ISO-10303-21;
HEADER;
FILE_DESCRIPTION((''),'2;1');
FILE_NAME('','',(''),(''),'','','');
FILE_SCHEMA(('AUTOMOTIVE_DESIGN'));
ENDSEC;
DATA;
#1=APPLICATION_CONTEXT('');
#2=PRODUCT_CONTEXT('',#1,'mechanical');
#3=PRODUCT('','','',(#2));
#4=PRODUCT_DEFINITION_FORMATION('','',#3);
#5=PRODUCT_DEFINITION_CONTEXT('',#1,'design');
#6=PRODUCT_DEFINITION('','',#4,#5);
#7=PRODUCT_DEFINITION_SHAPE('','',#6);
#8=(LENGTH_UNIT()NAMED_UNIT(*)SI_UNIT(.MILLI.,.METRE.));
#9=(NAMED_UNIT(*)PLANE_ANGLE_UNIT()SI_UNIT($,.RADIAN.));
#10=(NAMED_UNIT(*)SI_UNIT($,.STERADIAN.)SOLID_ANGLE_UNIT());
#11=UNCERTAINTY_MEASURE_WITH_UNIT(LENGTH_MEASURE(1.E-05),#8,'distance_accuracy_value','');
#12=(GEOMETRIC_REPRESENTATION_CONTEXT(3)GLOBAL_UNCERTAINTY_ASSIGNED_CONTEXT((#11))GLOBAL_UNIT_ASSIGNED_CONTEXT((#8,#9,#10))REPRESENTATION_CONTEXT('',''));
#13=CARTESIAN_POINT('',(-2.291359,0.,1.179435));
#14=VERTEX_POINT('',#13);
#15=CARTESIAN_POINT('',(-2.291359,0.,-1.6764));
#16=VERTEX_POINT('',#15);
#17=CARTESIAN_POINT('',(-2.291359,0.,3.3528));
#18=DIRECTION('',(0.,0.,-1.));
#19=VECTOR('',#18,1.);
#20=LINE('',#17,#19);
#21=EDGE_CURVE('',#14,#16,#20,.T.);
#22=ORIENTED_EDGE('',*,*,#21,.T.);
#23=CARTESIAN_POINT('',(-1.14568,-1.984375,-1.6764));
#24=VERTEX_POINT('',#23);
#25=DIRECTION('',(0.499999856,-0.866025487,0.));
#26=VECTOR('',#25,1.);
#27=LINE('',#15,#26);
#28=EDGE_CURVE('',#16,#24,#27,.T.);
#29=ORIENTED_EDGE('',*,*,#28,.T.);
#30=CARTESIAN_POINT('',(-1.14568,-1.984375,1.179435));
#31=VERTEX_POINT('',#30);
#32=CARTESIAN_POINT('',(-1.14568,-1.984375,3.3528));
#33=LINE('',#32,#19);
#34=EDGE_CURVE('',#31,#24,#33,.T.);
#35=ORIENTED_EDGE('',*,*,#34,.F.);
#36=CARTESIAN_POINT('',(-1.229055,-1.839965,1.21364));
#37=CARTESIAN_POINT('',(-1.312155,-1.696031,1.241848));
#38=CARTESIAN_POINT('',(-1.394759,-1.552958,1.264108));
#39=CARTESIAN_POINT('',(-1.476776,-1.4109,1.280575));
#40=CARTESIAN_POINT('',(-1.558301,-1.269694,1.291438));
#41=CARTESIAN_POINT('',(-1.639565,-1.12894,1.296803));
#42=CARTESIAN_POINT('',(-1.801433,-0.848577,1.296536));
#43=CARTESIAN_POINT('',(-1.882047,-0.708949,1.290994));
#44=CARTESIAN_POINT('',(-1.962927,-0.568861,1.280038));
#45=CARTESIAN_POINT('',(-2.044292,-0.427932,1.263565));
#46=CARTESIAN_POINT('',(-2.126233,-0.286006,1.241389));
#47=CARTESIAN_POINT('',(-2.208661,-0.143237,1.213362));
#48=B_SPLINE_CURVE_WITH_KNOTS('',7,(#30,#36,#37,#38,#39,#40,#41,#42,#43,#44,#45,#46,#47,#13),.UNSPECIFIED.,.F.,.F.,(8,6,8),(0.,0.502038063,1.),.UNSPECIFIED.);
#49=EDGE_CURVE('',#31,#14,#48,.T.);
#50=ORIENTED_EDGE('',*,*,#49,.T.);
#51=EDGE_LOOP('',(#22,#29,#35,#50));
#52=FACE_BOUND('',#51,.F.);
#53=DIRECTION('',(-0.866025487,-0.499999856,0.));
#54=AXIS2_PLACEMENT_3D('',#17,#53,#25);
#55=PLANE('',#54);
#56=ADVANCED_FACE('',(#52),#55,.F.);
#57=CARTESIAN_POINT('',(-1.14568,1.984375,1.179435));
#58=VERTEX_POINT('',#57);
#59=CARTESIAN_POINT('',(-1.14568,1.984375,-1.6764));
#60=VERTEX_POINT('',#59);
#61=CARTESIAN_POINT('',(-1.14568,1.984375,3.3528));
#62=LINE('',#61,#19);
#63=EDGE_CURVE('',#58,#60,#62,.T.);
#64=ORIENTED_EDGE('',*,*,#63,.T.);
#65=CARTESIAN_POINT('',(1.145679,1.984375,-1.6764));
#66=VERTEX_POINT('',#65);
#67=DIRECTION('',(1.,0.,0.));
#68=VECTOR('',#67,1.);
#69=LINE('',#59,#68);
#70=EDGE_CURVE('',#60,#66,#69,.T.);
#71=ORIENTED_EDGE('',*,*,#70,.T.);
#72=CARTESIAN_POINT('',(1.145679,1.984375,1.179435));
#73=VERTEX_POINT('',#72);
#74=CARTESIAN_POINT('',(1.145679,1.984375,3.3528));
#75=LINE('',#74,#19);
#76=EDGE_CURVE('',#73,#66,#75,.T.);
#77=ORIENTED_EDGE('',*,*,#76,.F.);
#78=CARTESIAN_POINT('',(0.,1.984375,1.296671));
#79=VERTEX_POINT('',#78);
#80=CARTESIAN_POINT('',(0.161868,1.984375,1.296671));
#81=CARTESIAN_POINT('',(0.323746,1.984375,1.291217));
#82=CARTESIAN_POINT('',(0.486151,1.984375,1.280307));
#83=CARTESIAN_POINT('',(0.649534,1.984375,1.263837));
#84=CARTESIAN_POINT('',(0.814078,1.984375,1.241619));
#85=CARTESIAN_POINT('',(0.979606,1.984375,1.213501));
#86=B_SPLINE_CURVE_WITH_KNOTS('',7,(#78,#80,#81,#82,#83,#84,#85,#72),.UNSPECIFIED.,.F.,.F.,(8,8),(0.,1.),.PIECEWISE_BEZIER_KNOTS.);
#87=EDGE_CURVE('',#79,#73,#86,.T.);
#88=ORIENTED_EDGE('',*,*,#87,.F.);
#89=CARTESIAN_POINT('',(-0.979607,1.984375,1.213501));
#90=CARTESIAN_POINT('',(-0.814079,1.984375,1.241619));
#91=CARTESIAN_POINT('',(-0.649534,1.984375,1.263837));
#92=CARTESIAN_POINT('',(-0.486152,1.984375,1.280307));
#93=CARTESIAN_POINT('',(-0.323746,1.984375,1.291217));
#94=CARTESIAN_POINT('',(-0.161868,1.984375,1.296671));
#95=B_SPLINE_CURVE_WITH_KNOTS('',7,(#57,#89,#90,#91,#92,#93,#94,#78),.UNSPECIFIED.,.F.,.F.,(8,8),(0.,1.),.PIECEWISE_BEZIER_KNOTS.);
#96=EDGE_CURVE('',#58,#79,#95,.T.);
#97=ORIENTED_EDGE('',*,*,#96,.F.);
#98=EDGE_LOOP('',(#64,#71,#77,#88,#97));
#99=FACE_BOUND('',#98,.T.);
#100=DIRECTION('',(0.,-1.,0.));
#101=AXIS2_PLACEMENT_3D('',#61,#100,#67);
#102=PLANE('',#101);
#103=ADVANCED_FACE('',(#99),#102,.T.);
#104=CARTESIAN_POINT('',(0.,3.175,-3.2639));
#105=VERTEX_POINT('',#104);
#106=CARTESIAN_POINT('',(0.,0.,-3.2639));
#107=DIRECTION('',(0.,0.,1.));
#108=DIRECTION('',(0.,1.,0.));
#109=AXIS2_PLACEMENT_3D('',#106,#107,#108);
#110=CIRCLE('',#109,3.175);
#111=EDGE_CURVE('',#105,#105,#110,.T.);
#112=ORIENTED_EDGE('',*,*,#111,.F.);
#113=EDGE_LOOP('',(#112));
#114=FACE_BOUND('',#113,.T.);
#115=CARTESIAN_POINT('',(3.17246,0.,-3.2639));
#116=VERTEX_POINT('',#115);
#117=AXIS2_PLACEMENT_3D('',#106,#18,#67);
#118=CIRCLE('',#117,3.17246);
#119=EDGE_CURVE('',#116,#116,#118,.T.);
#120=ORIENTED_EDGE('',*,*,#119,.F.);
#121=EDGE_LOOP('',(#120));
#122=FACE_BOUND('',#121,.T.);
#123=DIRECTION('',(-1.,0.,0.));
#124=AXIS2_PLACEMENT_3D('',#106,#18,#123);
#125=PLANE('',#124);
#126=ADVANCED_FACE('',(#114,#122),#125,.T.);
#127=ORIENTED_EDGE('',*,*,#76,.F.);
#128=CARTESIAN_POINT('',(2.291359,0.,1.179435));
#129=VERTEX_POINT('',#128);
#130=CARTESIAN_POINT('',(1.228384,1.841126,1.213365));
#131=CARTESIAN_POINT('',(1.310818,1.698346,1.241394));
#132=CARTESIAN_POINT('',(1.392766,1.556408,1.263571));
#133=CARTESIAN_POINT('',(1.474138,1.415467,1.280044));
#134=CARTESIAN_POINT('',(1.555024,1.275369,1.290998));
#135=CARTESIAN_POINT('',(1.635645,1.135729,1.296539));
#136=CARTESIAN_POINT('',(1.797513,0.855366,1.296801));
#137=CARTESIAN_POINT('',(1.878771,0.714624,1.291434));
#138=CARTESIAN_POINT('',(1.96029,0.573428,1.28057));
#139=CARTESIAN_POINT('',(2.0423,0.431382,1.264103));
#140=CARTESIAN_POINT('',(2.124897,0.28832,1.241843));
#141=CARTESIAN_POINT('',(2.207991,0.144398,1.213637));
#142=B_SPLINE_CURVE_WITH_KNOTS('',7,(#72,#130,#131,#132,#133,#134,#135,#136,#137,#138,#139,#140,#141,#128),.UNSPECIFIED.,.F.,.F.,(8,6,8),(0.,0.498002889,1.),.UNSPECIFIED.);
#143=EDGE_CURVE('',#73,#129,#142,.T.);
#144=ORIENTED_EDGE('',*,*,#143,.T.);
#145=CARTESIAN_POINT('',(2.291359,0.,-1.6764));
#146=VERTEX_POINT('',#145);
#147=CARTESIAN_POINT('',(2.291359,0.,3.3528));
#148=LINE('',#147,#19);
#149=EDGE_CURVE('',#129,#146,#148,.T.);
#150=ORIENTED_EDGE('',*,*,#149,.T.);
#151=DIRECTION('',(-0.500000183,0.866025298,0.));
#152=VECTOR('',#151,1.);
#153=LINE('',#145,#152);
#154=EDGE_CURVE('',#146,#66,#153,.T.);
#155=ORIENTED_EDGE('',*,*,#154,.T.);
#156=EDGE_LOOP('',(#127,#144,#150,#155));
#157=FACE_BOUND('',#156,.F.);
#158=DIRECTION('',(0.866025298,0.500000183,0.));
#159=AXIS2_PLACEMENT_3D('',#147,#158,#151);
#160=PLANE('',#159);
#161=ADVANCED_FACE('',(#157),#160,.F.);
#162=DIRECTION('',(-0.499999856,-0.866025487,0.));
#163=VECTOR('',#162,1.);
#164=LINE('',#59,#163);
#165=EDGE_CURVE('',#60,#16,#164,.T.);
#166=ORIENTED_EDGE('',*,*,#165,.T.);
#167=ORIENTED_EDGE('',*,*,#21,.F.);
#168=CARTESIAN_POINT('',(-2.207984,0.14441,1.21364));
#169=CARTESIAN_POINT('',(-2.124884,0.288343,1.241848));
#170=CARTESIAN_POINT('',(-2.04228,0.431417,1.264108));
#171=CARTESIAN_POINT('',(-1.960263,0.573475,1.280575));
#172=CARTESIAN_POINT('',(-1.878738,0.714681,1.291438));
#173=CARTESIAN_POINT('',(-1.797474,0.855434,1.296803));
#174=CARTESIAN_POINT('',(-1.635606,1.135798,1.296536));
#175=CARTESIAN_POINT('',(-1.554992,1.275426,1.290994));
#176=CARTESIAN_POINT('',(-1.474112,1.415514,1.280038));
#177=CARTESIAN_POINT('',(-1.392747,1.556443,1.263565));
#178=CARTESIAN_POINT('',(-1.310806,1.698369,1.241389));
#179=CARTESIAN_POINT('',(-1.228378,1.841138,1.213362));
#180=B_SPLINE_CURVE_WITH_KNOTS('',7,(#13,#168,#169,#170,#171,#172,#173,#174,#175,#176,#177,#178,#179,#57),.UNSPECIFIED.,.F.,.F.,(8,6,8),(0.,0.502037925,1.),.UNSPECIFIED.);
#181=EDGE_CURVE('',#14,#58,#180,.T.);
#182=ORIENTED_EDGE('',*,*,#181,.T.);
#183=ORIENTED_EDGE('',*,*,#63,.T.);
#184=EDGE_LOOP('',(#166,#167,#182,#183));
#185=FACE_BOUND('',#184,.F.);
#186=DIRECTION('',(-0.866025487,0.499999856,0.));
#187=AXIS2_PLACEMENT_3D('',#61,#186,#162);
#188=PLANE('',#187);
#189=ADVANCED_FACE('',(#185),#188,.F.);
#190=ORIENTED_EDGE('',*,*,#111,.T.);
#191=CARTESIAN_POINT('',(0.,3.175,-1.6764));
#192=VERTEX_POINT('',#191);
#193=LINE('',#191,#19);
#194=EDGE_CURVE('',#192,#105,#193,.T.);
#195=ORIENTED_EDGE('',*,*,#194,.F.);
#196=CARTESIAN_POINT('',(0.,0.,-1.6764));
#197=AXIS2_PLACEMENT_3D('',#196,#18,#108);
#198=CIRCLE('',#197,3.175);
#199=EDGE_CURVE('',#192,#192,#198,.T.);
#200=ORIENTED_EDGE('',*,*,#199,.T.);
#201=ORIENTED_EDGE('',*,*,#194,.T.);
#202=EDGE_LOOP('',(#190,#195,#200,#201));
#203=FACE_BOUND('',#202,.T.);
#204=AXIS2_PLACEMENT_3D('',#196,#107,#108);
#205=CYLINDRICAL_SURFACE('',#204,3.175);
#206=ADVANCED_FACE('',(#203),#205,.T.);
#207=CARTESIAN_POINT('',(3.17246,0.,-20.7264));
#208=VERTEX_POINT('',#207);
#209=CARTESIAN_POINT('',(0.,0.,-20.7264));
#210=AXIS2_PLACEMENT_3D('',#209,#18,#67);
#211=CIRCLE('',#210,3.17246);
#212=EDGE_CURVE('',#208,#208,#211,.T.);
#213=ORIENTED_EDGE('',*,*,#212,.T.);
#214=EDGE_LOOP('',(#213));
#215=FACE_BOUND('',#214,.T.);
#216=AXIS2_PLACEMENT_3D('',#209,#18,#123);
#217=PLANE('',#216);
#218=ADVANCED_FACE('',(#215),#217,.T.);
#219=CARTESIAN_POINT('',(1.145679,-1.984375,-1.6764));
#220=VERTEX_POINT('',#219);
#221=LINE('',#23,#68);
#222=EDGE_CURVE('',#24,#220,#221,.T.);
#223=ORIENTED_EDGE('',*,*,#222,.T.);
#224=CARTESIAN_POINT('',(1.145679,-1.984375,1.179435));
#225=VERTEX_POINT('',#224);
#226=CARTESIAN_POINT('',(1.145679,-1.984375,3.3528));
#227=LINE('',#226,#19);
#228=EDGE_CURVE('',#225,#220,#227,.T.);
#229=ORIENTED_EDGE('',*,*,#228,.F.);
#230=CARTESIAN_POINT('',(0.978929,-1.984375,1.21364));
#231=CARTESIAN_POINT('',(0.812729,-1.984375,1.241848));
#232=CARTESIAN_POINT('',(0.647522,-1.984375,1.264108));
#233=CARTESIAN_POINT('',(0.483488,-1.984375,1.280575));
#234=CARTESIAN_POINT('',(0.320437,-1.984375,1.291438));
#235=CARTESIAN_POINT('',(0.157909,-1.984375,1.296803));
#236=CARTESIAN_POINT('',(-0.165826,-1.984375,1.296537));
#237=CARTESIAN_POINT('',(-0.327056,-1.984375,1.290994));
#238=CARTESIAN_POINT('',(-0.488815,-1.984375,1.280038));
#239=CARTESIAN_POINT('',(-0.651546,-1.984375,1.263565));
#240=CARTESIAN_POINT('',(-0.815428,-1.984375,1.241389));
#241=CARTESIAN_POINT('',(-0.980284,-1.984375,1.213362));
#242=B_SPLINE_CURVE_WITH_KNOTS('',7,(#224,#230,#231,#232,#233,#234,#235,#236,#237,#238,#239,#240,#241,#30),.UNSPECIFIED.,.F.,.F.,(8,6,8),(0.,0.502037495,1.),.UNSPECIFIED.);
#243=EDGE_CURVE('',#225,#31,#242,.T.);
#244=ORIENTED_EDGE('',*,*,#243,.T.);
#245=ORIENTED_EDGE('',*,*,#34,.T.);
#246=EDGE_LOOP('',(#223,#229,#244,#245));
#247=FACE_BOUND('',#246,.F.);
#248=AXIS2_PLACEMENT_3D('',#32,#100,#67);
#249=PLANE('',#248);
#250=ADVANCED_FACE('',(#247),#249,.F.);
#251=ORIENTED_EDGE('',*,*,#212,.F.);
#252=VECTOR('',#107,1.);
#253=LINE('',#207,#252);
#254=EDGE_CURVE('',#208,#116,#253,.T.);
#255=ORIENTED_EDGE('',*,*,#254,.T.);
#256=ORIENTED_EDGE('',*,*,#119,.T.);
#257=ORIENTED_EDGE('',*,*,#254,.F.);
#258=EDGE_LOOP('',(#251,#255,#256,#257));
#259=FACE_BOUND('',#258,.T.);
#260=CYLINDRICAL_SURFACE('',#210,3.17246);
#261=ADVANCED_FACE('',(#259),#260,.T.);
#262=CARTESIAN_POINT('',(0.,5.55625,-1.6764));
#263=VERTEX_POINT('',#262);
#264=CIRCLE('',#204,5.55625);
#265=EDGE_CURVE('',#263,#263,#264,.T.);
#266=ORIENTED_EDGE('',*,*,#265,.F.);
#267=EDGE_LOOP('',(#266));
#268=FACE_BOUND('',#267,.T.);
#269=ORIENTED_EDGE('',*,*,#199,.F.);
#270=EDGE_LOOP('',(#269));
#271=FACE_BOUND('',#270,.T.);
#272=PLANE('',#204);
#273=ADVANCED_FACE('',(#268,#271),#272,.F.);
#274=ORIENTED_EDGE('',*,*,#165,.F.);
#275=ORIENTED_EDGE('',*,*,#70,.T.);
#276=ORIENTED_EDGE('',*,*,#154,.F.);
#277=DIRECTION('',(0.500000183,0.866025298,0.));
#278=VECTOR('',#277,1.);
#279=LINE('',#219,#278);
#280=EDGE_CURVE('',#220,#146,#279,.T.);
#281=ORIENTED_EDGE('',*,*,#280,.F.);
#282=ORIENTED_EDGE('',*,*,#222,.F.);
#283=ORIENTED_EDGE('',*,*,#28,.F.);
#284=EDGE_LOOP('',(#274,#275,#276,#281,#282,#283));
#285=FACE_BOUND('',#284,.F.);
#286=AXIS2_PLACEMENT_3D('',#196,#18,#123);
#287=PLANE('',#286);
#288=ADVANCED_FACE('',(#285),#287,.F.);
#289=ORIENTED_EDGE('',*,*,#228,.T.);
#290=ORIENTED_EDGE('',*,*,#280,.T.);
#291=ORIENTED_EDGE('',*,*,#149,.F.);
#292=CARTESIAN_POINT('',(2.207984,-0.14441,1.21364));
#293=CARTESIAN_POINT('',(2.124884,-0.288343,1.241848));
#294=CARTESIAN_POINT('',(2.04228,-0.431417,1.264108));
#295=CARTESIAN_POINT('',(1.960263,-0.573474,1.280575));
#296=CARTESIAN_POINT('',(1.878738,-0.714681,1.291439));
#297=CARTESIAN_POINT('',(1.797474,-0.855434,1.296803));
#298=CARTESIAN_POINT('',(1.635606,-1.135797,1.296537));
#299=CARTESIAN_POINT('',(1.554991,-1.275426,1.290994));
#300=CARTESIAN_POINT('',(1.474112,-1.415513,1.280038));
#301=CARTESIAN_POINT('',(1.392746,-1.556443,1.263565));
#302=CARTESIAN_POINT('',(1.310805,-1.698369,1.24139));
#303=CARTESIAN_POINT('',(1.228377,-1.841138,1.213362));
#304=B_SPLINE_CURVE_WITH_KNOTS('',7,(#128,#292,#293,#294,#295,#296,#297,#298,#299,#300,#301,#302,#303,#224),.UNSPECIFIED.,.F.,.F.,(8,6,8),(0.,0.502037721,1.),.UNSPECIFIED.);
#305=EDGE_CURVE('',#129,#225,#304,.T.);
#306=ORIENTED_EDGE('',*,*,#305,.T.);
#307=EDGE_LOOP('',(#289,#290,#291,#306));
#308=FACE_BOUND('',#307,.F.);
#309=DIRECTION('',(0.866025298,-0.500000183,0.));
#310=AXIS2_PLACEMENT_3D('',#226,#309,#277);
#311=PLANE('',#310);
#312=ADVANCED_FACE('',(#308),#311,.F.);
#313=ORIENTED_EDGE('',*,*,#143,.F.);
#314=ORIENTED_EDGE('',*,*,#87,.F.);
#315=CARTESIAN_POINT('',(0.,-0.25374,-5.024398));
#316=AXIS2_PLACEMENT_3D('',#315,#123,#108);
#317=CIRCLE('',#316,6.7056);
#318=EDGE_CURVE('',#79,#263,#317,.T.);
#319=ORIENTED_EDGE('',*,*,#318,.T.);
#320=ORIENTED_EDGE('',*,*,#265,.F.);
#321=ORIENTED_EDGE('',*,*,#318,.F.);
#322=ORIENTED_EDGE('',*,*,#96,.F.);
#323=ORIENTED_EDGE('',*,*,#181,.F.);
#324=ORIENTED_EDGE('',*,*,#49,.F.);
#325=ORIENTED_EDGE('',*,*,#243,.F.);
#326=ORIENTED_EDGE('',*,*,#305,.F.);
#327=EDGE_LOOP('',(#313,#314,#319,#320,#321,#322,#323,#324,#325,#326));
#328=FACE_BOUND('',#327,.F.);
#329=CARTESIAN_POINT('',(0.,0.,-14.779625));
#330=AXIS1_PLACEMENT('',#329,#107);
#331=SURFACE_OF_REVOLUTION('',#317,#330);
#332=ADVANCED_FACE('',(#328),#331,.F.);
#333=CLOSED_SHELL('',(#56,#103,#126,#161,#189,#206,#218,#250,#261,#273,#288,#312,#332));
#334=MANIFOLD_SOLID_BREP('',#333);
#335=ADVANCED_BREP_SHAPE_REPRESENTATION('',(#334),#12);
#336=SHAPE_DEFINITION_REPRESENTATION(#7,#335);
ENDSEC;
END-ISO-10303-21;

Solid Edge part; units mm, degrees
sketch "Sketch1" plane through (0, 0, 0) normal (1, 0, 0) x (0, 1, 0)
  line L0 (0, -1.6764) -> (0, 1.6764)
  arc A0 (0, 1.6764) -> (5.55625, -1.6764) centre (-0.25374, -5.024398) cw
  line L1 (0, -1.6764) -> (5.55625, -1.6764)
  dimension "D1" = 3.3528
  dimension "D2" = 6.7056
revolve "RevolvedProtrusion1" add sketch "Sketch1" angle 360 about axis through (0, 0, -14.779625) along (0, 0, 1)
sketch "Sketch2" plane through (0, 0, -1.6764) normal (0, 0, -1) x (0, 1, 0)
  circle A0 centre (0, 0) radius 3.175
  dimension "D1" = 6.35
extrude "Protrusion1" add sketch "Sketch2" along normal blind 19.05
sketch "Sketch3" plane through (0, 0, -20.7264) normal (0, 0, -1) x (1, 0, 0)
  circle A0 centre (0, 0) radius 3.17246
  dimension "D1" = 0.0025
extrude "Cutout1" cut sketch "Sketch3" against normal blind 17.4625 flip side to cut
sketch "Sketch4" plane through (-0.603226, 0.360624, 3.3528) normal (0, 0, 1) x (1, 0, 0)
  line L0 (-0.542454, 1.623751) -> (1.748905, 1.623751)
  line L1 (2.894585, -0.360624) -> (1.748905, 1.623751)
  line L2 (1.748905, -2.344999) -> (2.894585, -0.360624)
  line L3 (-0.542454, -2.344999) -> (1.748905, -2.344999)
  line L4 (-1.688133, -0.360624) -> (-0.542454, -2.344999)
  line L5 (-0.542454, 1.623751) -> (-1.688133, -0.360624)
extrude "ExtrudedCutout_11" cut sketch "Sketch4" against normal blind 5.0292
properties part number "24103363"
